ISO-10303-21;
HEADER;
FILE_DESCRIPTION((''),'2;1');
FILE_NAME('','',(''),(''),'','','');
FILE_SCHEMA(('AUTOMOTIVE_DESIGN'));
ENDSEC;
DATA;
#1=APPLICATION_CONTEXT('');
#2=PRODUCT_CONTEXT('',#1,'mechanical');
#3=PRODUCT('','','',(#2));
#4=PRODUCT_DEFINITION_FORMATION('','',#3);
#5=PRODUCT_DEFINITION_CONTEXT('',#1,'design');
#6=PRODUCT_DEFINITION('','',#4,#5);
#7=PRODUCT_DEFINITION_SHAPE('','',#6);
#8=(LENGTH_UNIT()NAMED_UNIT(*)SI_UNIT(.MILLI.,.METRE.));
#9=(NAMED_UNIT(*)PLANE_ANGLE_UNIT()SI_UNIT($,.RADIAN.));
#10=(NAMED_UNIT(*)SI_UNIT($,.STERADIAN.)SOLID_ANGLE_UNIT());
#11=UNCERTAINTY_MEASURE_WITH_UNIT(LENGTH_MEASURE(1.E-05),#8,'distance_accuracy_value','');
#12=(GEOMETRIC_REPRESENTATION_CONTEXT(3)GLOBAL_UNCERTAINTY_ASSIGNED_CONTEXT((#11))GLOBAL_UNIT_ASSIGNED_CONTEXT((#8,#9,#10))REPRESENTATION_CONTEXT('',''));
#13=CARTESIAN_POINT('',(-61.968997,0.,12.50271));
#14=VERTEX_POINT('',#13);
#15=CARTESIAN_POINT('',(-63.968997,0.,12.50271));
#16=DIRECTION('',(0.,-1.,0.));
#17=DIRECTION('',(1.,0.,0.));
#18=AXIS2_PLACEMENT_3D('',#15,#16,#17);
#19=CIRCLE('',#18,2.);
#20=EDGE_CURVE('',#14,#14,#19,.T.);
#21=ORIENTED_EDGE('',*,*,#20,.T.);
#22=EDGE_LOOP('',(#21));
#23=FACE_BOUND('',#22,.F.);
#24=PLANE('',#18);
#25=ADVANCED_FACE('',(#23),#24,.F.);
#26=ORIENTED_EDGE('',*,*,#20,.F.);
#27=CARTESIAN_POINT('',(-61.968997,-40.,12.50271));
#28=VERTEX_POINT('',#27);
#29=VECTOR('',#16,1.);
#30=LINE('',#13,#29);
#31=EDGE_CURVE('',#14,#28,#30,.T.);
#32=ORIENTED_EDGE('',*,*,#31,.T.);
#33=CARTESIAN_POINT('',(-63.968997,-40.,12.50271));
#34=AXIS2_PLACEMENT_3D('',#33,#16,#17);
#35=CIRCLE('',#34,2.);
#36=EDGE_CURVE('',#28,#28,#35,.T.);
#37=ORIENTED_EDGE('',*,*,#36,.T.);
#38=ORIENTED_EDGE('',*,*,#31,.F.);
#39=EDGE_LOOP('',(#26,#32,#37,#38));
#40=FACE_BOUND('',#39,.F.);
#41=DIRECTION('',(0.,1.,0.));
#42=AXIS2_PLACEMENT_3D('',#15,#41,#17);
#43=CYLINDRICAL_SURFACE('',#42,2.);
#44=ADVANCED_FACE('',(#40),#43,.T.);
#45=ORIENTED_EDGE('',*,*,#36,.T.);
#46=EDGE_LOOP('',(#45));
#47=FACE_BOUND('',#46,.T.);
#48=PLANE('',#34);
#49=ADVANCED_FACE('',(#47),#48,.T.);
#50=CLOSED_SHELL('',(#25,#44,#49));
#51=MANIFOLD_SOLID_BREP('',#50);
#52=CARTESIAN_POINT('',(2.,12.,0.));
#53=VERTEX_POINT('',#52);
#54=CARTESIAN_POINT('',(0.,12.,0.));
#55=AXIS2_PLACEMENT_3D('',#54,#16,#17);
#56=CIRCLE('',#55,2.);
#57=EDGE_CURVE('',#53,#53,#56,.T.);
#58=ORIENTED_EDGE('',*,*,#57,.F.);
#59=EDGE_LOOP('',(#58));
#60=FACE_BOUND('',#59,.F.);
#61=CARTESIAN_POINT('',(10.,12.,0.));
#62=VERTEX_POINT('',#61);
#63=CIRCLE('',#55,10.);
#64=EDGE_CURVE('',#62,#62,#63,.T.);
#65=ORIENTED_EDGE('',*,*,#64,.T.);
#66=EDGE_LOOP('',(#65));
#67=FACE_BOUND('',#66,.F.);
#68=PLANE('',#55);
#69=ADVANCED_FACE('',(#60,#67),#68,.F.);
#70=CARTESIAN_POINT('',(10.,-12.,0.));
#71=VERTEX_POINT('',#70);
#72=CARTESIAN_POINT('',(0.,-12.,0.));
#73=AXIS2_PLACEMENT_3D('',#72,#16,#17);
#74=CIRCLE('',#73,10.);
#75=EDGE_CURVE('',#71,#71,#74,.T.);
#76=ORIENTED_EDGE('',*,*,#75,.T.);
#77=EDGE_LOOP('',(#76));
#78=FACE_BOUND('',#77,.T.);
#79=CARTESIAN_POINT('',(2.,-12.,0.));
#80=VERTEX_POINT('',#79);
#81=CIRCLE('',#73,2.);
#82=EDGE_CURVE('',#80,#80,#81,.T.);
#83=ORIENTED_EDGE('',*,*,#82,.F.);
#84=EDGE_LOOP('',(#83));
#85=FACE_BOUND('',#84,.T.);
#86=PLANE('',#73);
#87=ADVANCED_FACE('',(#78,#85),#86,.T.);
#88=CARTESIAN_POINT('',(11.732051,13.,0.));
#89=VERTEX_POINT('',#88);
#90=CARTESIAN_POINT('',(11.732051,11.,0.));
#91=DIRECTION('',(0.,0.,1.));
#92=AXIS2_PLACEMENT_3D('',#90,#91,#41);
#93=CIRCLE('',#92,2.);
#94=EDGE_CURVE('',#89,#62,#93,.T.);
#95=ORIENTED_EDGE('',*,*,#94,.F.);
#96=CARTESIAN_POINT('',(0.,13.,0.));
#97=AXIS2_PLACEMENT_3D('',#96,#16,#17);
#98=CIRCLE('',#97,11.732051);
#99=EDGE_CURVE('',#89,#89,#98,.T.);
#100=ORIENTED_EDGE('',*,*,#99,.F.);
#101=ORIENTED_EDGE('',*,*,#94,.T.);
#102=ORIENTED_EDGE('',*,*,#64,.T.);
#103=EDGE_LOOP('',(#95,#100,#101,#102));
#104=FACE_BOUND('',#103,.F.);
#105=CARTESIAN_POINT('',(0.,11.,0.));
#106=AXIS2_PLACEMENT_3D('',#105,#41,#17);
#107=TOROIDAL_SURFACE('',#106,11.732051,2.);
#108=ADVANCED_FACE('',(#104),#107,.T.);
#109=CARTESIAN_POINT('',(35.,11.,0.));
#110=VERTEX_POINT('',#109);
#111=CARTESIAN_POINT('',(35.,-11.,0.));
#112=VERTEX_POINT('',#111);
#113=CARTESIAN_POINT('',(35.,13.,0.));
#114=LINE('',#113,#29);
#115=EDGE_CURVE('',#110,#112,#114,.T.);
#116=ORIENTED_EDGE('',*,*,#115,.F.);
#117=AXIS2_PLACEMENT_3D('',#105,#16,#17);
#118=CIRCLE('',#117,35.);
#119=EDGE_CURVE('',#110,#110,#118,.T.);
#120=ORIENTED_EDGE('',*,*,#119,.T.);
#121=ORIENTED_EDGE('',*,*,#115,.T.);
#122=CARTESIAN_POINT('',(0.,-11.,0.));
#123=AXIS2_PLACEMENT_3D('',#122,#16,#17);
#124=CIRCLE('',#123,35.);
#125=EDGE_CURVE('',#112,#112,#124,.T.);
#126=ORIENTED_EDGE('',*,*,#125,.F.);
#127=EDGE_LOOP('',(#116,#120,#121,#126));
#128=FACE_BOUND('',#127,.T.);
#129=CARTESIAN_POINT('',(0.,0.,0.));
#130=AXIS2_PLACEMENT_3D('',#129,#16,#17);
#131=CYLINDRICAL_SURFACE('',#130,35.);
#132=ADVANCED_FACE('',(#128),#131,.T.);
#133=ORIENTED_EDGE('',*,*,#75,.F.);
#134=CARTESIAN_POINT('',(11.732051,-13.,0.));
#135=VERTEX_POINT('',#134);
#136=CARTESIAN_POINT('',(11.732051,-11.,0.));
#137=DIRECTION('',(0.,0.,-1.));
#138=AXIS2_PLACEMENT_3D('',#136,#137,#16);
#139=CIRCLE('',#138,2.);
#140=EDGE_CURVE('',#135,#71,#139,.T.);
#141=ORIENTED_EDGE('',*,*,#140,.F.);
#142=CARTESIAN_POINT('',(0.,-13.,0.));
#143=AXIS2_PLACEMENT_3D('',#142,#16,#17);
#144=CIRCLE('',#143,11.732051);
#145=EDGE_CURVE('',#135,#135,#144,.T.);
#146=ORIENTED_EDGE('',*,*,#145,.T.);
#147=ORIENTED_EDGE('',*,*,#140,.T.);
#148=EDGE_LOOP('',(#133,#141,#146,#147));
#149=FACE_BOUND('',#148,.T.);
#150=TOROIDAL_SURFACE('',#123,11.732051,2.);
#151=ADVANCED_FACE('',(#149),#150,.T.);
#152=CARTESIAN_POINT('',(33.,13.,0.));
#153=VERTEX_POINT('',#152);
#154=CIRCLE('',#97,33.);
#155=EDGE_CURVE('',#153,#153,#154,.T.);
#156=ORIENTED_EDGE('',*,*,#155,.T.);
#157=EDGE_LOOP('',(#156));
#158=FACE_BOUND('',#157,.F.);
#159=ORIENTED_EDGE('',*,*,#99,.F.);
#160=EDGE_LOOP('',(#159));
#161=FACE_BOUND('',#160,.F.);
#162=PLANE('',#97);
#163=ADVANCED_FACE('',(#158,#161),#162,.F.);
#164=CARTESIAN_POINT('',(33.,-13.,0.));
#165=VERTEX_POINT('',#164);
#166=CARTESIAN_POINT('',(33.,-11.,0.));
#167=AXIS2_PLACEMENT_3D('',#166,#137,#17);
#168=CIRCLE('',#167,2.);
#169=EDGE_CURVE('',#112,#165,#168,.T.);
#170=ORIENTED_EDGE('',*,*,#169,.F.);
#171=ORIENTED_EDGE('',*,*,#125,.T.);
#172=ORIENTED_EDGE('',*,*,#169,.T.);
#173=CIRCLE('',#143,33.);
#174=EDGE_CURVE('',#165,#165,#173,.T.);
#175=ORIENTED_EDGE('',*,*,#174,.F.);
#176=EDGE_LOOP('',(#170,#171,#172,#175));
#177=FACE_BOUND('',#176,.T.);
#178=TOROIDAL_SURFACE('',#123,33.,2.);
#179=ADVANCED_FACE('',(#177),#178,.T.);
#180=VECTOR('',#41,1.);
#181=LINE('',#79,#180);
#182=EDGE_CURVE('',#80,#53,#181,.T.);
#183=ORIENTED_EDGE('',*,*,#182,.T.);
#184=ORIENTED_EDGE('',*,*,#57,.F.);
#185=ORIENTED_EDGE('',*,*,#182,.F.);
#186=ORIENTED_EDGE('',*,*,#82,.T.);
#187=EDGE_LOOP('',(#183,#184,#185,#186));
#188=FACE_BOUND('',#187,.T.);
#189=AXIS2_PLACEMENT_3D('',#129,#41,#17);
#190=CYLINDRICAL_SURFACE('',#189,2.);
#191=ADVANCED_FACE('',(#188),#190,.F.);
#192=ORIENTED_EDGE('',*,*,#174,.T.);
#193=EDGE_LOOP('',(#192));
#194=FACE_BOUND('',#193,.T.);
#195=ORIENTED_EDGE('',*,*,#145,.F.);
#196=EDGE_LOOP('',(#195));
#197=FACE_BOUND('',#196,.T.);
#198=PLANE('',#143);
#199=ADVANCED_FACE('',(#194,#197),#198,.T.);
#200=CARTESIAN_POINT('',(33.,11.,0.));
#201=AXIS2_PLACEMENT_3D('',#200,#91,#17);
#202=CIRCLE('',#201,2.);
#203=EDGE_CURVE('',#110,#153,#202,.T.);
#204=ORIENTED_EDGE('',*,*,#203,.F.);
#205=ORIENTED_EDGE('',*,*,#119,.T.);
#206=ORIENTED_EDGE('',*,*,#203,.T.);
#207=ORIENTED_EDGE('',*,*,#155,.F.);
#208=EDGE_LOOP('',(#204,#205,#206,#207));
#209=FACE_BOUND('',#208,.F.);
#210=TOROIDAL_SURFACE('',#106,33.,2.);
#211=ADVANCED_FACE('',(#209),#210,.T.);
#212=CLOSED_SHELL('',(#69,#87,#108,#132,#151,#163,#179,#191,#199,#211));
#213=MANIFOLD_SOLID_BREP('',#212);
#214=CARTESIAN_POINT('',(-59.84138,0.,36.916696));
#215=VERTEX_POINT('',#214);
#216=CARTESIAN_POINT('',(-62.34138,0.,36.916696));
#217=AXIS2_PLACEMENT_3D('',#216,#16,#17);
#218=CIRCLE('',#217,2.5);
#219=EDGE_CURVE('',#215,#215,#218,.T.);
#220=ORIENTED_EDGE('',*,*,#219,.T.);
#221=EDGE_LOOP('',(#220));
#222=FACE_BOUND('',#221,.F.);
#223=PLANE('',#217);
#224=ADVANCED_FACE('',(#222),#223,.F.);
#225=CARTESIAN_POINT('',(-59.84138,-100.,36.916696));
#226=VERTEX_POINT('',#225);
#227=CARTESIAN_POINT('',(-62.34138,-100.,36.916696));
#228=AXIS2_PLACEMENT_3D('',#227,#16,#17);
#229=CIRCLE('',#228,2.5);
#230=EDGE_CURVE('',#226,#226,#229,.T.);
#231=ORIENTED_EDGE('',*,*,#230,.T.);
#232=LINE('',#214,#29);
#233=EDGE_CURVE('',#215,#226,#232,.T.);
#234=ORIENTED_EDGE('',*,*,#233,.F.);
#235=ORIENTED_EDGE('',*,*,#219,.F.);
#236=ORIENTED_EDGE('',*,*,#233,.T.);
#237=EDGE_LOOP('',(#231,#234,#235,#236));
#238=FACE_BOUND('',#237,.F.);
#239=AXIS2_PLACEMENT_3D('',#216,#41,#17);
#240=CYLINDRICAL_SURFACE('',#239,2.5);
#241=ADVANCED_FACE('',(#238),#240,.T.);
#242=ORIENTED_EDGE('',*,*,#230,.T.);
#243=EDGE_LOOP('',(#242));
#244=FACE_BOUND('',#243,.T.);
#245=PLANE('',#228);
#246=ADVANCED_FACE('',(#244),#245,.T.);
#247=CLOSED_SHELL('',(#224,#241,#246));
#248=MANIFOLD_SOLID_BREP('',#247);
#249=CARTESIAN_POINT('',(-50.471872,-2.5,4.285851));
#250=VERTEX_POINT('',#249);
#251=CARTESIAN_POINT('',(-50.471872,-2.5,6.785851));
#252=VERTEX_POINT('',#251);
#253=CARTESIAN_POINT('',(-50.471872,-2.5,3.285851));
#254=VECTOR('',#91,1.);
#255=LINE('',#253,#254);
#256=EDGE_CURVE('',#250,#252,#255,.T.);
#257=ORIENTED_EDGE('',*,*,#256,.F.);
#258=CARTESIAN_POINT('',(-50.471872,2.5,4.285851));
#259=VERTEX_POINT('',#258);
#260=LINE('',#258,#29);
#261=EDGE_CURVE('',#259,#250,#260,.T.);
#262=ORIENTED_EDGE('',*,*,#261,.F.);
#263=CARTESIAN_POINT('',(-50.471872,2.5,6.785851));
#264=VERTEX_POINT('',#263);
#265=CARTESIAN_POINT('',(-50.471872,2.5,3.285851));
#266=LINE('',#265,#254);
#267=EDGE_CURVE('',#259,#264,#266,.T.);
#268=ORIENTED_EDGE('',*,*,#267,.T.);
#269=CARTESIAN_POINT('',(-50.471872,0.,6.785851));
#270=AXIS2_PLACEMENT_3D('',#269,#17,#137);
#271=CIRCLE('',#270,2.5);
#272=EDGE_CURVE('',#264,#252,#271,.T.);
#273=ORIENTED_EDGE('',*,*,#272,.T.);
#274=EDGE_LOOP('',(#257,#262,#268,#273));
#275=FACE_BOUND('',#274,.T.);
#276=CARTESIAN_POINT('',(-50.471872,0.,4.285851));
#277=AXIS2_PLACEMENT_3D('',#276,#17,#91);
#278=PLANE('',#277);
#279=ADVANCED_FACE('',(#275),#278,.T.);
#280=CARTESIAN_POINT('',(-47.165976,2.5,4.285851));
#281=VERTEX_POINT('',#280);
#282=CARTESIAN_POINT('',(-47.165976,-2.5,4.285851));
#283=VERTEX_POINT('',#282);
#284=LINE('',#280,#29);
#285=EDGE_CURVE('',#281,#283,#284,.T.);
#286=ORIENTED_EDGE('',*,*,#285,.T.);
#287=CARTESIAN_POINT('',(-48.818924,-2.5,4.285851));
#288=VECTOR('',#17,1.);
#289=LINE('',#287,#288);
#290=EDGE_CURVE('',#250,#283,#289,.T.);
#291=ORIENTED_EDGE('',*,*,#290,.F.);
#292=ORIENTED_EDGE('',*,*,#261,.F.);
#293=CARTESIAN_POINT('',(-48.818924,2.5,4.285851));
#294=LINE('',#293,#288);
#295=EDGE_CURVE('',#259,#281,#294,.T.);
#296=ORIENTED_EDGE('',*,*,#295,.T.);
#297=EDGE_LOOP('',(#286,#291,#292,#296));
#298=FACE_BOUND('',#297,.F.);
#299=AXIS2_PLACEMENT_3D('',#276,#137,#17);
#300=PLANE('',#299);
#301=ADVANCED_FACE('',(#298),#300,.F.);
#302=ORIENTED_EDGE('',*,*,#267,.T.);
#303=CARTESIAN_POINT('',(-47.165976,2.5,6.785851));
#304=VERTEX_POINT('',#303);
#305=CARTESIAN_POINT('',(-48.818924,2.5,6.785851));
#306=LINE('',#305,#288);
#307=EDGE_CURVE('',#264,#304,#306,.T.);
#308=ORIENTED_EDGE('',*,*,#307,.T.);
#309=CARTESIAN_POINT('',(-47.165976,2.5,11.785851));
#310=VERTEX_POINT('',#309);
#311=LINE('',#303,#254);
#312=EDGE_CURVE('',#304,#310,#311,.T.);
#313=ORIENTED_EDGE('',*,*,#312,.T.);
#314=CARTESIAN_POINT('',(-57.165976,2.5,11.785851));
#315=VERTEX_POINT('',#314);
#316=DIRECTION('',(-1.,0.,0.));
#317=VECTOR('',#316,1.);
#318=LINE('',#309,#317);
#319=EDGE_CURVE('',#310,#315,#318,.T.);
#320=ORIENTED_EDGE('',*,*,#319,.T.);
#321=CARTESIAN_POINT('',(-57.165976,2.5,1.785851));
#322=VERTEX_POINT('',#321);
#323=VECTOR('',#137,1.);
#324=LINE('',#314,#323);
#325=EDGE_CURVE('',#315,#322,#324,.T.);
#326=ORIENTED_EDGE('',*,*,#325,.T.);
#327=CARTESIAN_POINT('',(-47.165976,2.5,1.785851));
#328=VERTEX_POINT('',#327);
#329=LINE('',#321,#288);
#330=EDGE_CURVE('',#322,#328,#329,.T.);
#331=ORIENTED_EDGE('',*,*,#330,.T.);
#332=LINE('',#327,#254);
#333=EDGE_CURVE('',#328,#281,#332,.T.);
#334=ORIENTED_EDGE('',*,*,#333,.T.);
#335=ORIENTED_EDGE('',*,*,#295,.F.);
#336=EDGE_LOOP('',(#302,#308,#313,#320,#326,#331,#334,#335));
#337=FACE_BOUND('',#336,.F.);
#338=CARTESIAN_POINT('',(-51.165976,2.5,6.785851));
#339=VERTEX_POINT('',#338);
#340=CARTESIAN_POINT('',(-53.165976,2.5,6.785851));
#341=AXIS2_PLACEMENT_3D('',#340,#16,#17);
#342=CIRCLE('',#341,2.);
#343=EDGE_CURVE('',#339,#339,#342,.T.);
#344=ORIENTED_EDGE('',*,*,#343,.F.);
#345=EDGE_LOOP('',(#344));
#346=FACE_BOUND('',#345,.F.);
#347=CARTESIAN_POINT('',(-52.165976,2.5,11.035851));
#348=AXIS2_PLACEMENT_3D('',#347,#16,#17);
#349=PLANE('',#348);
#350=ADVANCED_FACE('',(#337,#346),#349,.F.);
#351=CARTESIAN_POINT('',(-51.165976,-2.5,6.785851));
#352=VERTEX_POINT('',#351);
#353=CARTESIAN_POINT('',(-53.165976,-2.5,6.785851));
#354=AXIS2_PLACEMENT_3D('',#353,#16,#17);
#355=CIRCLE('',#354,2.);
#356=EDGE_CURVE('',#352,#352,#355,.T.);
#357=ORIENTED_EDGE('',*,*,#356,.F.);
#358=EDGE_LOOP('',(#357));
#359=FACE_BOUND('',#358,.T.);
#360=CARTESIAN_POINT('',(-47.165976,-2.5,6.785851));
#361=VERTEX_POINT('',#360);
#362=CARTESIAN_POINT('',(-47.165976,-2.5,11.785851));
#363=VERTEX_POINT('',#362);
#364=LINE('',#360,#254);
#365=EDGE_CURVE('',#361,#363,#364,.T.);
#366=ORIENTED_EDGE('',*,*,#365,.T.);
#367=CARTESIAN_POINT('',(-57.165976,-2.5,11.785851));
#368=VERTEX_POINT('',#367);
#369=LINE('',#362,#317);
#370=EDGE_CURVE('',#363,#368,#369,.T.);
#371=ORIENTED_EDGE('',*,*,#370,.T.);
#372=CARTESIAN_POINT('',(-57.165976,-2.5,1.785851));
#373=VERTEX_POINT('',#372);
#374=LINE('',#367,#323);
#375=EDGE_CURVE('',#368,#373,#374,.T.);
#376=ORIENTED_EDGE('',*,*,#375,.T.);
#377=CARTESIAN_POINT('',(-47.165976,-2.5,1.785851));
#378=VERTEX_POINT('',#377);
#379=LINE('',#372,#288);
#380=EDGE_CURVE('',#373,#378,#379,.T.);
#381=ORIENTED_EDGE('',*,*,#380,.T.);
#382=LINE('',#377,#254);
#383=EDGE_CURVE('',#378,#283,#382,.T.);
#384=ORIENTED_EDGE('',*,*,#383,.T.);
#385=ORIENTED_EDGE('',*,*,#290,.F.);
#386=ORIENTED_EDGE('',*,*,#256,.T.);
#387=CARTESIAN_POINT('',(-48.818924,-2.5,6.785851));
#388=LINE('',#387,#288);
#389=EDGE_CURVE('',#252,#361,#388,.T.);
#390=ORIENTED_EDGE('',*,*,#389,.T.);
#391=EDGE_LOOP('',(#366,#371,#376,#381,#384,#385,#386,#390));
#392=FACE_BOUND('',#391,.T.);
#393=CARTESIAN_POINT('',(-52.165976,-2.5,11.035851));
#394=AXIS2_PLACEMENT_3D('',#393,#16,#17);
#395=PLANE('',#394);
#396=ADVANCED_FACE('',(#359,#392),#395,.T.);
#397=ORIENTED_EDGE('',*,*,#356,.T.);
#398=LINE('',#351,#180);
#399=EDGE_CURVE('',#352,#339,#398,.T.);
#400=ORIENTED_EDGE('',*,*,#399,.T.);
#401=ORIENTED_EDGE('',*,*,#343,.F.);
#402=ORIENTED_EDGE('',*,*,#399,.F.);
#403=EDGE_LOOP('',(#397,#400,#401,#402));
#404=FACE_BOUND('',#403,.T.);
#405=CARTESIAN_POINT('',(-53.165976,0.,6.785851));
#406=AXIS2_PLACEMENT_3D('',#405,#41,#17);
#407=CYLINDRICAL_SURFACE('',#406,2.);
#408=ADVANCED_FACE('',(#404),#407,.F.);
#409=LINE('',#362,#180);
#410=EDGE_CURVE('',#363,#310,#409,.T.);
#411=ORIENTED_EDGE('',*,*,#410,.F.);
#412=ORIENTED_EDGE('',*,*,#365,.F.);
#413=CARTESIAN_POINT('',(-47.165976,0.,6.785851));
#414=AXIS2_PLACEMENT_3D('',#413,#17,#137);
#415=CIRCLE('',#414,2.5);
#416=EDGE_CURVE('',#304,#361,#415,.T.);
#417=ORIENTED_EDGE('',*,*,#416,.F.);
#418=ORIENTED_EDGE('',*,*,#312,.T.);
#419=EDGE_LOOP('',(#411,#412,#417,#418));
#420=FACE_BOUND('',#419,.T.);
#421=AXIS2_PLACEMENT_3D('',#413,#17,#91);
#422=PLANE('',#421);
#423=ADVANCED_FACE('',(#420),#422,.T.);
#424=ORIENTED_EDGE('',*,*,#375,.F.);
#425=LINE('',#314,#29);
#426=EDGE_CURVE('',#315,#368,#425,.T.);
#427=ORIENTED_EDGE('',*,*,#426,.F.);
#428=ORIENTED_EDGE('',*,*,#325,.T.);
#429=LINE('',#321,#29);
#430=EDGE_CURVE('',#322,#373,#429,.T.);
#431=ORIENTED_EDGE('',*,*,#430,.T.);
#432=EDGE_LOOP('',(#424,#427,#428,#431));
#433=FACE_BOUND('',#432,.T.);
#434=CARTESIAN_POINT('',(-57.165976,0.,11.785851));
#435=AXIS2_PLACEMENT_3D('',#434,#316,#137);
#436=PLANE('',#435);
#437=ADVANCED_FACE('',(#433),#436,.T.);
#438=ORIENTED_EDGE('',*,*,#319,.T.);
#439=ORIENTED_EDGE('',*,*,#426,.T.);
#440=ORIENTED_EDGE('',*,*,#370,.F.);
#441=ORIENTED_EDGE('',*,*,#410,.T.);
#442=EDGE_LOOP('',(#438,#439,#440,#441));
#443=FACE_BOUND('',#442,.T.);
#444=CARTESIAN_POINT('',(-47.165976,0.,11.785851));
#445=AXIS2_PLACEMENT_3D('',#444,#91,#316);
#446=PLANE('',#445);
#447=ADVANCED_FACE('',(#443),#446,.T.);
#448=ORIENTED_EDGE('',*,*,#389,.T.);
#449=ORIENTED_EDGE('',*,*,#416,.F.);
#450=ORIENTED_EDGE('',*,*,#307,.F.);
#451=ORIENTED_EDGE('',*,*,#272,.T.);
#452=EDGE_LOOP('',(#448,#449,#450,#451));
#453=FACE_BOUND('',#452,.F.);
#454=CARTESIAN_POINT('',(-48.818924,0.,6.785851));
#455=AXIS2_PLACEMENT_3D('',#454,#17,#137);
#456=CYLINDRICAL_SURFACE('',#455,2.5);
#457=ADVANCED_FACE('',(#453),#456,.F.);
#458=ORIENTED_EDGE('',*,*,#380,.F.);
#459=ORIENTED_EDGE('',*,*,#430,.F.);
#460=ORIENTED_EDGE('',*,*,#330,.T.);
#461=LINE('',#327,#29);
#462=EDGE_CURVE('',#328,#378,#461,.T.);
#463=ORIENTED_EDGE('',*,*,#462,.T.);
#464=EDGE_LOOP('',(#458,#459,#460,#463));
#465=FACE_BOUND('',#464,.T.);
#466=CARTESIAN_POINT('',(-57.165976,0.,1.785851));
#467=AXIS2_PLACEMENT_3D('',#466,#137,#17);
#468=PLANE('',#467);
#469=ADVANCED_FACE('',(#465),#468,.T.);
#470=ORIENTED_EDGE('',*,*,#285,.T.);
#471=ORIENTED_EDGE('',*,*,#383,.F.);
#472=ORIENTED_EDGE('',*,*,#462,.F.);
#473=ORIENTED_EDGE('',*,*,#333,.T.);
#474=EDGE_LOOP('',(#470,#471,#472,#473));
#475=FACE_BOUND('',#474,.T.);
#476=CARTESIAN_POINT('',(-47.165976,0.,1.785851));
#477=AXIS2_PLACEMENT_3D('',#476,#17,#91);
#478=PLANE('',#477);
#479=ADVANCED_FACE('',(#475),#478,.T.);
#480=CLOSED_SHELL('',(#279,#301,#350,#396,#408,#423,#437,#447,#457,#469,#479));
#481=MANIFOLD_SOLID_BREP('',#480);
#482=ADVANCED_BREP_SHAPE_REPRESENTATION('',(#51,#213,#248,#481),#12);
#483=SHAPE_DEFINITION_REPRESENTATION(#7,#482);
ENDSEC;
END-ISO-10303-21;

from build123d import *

# Parameters (mm, degrees)
F0_R     = 10
F0_R_2   = 2
F1_DEPTH = 12
F0_R_3   = 35
F2_DEPTH = 13
F4_R     = 2.5
F5_DEPTH = 100
F4_R_2   = 2
F6_DEPTH = 40
F4_W     = 3.3058956834
F4_H     = 1
F4_H_2   = 2.5
F7_DEPTH = 2.5


# Not quite as in the source:
# - a fillet or chamfer that OpenCascade refuses, or shapes differently, is made with other operations: its cross-section is extruded or revolved along the edge and cut away or added


with BuildPart() as f1:
    # F0 (on Front) → F1 (new body, symmetric)
    with BuildSketch(Plane.XZ):
        Circle(F0_R)
        Circle(F0_R_2, mode=Mode.SUBTRACT)
    extrude(amount=F1_DEPTH, both=True)

    # F0 (on Front) → F2 (join, symmetric)
    with BuildSketch(Plane.XZ):
        Circle(F0_R_3)
        Circle(F0_R, mode=Mode.SUBTRACT)
    extrude(amount=F2_DEPTH, both=True)

    # F3: fillet of radius 2 on 4 edges, made by hand

    # F3_s1 → F3_t2 (revolve, cut)
    with BuildSketch(Plane.XY):
        with BuildLine():
            ThreePointArc((11.7320508076, 13), (10.7320508076, 12.7320508076), (10, 12))
            Line((10, 12), (10, 13))
            Line((10, 13), (11.7320508076, 13))
        make_face()
    revolve(axis=Axis((0, 13, 0), (0, -1, 0)), mode=Mode.SUBTRACT)

    # F3_s3 → F3_t4 (revolve, cut)
    with BuildSketch(Plane.XY):
        with BuildLine():
            ThreePointArc((11.7320508076, -13), (10.7320508076, -12.7320508076), (10, -12))
            Line((10, -12), (10, -13))
            Line((10, -13), (11.7320508076, -13))
        make_face()
    revolve(axis=Axis((0, -13, 0), (0, -1, 0)), mode=Mode.SUBTRACT)

    # F3_s5 → F3_t6 (revolve, cut)
    with BuildSketch(Plane.XY):
        with BuildLine():
            ThreePointArc((35, -11), (34.4142135624, -12.4142135624), (33, -13))
            Line((33, -13), (35, -13))
            Line((35, -13), (35, -11))
        make_face()
    revolve(axis=Axis((0, -13, 0), (0, -1, 0)), mode=Mode.SUBTRACT)

    # F3_s7 → F3_t8 (revolve, cut)
    with BuildSketch(Plane.XY):
        with BuildLine():
            ThreePointArc((35, 11), (34.4142135624, 12.4142135624), (33, 13))
            Line((33, 13), (35, 13))
            Line((35, 13), (35, 11))
        make_face()
    revolve(axis=Axis((0, 13, 0), (0, -1, 0)), mode=Mode.SUBTRACT)


with BuildPart() as f5:
    # F4 (on Front) → F5 (new body)
    with BuildSketch(Plane.XZ):
        with Locations((-62.3413799527, 36.9166958029)):
            Circle(F4_R)
    extrude(amount=F5_DEPTH)


with BuildPart() as f6:
    # F4 (on Front) → F6 (new body)
    with BuildSketch(Plane.XZ):
        with Locations((-63.968997372, 12.5027095192)):
            Circle(F4_R_2)
    extrude(amount=F6_DEPTH)


with BuildPart() as f7:
    # F4 (on Front) → F7 (new body, symmetric)
    with BuildSketch(Plane.XZ):
        Polygon((-47.1659764079, 10.2858506218), (-47.1659764079, 11.7858506218), (-57.1659764079, 11.7858506218), (-57.1659764079, 10.2858506218), (-50.4718720913, 10.2858506218), align=None)
        Polygon((-50.4718720913, 10.2858506218), (-57.1659764079, 10.2858506218), (-57.1659764079, 3.2858506218), (-50.4718720913, 3.2858506218), (-50.4718720913, 4.2858506218), (-50.4718720913, 6.7858506218), (-50.4718720913, 9.2858506218), align=None)
        with Locations((-53.1659764079, 6.7858506218)):
            Circle(F4_R_2, mode=Mode.SUBTRACT)
        Polygon((-50.4718720913, 3.2858506218), (-57.1659764079, 3.2858506218), (-57.1659764079, 1.7858506218), (-47.1659764079, 1.7858506218), (-47.1659764079, 3.2858506218), align=None)
        with Locations((-48.8189242496, 9.7858506218)):
            Rectangle(F4_W, F4_H)
        with Locations((-48.8189242496, 8.0358506218)):
            Rectangle(F4_W, F4_H_2)
        with Locations((-48.8189242496, 3.7858506218)):
            Rectangle(F4_W, F4_H)
    extrude(amount=F7_DEPTH, both=True)

    # F4 (on Front) → F8 (revolve, cut)
    with BuildSketch(Plane.XZ):
        with Locations((-48.8189242496, 5.5358506218)):
            Rectangle(F4_W, F4_H_2)
    revolve(axis=Axis((-48.8189242496, 0, 6.7858506218), (1, 0, 0)), mode=Mode.SUBTRACT)


solid = Compound([f1.part, f5.part, f6.part, f7.part])
